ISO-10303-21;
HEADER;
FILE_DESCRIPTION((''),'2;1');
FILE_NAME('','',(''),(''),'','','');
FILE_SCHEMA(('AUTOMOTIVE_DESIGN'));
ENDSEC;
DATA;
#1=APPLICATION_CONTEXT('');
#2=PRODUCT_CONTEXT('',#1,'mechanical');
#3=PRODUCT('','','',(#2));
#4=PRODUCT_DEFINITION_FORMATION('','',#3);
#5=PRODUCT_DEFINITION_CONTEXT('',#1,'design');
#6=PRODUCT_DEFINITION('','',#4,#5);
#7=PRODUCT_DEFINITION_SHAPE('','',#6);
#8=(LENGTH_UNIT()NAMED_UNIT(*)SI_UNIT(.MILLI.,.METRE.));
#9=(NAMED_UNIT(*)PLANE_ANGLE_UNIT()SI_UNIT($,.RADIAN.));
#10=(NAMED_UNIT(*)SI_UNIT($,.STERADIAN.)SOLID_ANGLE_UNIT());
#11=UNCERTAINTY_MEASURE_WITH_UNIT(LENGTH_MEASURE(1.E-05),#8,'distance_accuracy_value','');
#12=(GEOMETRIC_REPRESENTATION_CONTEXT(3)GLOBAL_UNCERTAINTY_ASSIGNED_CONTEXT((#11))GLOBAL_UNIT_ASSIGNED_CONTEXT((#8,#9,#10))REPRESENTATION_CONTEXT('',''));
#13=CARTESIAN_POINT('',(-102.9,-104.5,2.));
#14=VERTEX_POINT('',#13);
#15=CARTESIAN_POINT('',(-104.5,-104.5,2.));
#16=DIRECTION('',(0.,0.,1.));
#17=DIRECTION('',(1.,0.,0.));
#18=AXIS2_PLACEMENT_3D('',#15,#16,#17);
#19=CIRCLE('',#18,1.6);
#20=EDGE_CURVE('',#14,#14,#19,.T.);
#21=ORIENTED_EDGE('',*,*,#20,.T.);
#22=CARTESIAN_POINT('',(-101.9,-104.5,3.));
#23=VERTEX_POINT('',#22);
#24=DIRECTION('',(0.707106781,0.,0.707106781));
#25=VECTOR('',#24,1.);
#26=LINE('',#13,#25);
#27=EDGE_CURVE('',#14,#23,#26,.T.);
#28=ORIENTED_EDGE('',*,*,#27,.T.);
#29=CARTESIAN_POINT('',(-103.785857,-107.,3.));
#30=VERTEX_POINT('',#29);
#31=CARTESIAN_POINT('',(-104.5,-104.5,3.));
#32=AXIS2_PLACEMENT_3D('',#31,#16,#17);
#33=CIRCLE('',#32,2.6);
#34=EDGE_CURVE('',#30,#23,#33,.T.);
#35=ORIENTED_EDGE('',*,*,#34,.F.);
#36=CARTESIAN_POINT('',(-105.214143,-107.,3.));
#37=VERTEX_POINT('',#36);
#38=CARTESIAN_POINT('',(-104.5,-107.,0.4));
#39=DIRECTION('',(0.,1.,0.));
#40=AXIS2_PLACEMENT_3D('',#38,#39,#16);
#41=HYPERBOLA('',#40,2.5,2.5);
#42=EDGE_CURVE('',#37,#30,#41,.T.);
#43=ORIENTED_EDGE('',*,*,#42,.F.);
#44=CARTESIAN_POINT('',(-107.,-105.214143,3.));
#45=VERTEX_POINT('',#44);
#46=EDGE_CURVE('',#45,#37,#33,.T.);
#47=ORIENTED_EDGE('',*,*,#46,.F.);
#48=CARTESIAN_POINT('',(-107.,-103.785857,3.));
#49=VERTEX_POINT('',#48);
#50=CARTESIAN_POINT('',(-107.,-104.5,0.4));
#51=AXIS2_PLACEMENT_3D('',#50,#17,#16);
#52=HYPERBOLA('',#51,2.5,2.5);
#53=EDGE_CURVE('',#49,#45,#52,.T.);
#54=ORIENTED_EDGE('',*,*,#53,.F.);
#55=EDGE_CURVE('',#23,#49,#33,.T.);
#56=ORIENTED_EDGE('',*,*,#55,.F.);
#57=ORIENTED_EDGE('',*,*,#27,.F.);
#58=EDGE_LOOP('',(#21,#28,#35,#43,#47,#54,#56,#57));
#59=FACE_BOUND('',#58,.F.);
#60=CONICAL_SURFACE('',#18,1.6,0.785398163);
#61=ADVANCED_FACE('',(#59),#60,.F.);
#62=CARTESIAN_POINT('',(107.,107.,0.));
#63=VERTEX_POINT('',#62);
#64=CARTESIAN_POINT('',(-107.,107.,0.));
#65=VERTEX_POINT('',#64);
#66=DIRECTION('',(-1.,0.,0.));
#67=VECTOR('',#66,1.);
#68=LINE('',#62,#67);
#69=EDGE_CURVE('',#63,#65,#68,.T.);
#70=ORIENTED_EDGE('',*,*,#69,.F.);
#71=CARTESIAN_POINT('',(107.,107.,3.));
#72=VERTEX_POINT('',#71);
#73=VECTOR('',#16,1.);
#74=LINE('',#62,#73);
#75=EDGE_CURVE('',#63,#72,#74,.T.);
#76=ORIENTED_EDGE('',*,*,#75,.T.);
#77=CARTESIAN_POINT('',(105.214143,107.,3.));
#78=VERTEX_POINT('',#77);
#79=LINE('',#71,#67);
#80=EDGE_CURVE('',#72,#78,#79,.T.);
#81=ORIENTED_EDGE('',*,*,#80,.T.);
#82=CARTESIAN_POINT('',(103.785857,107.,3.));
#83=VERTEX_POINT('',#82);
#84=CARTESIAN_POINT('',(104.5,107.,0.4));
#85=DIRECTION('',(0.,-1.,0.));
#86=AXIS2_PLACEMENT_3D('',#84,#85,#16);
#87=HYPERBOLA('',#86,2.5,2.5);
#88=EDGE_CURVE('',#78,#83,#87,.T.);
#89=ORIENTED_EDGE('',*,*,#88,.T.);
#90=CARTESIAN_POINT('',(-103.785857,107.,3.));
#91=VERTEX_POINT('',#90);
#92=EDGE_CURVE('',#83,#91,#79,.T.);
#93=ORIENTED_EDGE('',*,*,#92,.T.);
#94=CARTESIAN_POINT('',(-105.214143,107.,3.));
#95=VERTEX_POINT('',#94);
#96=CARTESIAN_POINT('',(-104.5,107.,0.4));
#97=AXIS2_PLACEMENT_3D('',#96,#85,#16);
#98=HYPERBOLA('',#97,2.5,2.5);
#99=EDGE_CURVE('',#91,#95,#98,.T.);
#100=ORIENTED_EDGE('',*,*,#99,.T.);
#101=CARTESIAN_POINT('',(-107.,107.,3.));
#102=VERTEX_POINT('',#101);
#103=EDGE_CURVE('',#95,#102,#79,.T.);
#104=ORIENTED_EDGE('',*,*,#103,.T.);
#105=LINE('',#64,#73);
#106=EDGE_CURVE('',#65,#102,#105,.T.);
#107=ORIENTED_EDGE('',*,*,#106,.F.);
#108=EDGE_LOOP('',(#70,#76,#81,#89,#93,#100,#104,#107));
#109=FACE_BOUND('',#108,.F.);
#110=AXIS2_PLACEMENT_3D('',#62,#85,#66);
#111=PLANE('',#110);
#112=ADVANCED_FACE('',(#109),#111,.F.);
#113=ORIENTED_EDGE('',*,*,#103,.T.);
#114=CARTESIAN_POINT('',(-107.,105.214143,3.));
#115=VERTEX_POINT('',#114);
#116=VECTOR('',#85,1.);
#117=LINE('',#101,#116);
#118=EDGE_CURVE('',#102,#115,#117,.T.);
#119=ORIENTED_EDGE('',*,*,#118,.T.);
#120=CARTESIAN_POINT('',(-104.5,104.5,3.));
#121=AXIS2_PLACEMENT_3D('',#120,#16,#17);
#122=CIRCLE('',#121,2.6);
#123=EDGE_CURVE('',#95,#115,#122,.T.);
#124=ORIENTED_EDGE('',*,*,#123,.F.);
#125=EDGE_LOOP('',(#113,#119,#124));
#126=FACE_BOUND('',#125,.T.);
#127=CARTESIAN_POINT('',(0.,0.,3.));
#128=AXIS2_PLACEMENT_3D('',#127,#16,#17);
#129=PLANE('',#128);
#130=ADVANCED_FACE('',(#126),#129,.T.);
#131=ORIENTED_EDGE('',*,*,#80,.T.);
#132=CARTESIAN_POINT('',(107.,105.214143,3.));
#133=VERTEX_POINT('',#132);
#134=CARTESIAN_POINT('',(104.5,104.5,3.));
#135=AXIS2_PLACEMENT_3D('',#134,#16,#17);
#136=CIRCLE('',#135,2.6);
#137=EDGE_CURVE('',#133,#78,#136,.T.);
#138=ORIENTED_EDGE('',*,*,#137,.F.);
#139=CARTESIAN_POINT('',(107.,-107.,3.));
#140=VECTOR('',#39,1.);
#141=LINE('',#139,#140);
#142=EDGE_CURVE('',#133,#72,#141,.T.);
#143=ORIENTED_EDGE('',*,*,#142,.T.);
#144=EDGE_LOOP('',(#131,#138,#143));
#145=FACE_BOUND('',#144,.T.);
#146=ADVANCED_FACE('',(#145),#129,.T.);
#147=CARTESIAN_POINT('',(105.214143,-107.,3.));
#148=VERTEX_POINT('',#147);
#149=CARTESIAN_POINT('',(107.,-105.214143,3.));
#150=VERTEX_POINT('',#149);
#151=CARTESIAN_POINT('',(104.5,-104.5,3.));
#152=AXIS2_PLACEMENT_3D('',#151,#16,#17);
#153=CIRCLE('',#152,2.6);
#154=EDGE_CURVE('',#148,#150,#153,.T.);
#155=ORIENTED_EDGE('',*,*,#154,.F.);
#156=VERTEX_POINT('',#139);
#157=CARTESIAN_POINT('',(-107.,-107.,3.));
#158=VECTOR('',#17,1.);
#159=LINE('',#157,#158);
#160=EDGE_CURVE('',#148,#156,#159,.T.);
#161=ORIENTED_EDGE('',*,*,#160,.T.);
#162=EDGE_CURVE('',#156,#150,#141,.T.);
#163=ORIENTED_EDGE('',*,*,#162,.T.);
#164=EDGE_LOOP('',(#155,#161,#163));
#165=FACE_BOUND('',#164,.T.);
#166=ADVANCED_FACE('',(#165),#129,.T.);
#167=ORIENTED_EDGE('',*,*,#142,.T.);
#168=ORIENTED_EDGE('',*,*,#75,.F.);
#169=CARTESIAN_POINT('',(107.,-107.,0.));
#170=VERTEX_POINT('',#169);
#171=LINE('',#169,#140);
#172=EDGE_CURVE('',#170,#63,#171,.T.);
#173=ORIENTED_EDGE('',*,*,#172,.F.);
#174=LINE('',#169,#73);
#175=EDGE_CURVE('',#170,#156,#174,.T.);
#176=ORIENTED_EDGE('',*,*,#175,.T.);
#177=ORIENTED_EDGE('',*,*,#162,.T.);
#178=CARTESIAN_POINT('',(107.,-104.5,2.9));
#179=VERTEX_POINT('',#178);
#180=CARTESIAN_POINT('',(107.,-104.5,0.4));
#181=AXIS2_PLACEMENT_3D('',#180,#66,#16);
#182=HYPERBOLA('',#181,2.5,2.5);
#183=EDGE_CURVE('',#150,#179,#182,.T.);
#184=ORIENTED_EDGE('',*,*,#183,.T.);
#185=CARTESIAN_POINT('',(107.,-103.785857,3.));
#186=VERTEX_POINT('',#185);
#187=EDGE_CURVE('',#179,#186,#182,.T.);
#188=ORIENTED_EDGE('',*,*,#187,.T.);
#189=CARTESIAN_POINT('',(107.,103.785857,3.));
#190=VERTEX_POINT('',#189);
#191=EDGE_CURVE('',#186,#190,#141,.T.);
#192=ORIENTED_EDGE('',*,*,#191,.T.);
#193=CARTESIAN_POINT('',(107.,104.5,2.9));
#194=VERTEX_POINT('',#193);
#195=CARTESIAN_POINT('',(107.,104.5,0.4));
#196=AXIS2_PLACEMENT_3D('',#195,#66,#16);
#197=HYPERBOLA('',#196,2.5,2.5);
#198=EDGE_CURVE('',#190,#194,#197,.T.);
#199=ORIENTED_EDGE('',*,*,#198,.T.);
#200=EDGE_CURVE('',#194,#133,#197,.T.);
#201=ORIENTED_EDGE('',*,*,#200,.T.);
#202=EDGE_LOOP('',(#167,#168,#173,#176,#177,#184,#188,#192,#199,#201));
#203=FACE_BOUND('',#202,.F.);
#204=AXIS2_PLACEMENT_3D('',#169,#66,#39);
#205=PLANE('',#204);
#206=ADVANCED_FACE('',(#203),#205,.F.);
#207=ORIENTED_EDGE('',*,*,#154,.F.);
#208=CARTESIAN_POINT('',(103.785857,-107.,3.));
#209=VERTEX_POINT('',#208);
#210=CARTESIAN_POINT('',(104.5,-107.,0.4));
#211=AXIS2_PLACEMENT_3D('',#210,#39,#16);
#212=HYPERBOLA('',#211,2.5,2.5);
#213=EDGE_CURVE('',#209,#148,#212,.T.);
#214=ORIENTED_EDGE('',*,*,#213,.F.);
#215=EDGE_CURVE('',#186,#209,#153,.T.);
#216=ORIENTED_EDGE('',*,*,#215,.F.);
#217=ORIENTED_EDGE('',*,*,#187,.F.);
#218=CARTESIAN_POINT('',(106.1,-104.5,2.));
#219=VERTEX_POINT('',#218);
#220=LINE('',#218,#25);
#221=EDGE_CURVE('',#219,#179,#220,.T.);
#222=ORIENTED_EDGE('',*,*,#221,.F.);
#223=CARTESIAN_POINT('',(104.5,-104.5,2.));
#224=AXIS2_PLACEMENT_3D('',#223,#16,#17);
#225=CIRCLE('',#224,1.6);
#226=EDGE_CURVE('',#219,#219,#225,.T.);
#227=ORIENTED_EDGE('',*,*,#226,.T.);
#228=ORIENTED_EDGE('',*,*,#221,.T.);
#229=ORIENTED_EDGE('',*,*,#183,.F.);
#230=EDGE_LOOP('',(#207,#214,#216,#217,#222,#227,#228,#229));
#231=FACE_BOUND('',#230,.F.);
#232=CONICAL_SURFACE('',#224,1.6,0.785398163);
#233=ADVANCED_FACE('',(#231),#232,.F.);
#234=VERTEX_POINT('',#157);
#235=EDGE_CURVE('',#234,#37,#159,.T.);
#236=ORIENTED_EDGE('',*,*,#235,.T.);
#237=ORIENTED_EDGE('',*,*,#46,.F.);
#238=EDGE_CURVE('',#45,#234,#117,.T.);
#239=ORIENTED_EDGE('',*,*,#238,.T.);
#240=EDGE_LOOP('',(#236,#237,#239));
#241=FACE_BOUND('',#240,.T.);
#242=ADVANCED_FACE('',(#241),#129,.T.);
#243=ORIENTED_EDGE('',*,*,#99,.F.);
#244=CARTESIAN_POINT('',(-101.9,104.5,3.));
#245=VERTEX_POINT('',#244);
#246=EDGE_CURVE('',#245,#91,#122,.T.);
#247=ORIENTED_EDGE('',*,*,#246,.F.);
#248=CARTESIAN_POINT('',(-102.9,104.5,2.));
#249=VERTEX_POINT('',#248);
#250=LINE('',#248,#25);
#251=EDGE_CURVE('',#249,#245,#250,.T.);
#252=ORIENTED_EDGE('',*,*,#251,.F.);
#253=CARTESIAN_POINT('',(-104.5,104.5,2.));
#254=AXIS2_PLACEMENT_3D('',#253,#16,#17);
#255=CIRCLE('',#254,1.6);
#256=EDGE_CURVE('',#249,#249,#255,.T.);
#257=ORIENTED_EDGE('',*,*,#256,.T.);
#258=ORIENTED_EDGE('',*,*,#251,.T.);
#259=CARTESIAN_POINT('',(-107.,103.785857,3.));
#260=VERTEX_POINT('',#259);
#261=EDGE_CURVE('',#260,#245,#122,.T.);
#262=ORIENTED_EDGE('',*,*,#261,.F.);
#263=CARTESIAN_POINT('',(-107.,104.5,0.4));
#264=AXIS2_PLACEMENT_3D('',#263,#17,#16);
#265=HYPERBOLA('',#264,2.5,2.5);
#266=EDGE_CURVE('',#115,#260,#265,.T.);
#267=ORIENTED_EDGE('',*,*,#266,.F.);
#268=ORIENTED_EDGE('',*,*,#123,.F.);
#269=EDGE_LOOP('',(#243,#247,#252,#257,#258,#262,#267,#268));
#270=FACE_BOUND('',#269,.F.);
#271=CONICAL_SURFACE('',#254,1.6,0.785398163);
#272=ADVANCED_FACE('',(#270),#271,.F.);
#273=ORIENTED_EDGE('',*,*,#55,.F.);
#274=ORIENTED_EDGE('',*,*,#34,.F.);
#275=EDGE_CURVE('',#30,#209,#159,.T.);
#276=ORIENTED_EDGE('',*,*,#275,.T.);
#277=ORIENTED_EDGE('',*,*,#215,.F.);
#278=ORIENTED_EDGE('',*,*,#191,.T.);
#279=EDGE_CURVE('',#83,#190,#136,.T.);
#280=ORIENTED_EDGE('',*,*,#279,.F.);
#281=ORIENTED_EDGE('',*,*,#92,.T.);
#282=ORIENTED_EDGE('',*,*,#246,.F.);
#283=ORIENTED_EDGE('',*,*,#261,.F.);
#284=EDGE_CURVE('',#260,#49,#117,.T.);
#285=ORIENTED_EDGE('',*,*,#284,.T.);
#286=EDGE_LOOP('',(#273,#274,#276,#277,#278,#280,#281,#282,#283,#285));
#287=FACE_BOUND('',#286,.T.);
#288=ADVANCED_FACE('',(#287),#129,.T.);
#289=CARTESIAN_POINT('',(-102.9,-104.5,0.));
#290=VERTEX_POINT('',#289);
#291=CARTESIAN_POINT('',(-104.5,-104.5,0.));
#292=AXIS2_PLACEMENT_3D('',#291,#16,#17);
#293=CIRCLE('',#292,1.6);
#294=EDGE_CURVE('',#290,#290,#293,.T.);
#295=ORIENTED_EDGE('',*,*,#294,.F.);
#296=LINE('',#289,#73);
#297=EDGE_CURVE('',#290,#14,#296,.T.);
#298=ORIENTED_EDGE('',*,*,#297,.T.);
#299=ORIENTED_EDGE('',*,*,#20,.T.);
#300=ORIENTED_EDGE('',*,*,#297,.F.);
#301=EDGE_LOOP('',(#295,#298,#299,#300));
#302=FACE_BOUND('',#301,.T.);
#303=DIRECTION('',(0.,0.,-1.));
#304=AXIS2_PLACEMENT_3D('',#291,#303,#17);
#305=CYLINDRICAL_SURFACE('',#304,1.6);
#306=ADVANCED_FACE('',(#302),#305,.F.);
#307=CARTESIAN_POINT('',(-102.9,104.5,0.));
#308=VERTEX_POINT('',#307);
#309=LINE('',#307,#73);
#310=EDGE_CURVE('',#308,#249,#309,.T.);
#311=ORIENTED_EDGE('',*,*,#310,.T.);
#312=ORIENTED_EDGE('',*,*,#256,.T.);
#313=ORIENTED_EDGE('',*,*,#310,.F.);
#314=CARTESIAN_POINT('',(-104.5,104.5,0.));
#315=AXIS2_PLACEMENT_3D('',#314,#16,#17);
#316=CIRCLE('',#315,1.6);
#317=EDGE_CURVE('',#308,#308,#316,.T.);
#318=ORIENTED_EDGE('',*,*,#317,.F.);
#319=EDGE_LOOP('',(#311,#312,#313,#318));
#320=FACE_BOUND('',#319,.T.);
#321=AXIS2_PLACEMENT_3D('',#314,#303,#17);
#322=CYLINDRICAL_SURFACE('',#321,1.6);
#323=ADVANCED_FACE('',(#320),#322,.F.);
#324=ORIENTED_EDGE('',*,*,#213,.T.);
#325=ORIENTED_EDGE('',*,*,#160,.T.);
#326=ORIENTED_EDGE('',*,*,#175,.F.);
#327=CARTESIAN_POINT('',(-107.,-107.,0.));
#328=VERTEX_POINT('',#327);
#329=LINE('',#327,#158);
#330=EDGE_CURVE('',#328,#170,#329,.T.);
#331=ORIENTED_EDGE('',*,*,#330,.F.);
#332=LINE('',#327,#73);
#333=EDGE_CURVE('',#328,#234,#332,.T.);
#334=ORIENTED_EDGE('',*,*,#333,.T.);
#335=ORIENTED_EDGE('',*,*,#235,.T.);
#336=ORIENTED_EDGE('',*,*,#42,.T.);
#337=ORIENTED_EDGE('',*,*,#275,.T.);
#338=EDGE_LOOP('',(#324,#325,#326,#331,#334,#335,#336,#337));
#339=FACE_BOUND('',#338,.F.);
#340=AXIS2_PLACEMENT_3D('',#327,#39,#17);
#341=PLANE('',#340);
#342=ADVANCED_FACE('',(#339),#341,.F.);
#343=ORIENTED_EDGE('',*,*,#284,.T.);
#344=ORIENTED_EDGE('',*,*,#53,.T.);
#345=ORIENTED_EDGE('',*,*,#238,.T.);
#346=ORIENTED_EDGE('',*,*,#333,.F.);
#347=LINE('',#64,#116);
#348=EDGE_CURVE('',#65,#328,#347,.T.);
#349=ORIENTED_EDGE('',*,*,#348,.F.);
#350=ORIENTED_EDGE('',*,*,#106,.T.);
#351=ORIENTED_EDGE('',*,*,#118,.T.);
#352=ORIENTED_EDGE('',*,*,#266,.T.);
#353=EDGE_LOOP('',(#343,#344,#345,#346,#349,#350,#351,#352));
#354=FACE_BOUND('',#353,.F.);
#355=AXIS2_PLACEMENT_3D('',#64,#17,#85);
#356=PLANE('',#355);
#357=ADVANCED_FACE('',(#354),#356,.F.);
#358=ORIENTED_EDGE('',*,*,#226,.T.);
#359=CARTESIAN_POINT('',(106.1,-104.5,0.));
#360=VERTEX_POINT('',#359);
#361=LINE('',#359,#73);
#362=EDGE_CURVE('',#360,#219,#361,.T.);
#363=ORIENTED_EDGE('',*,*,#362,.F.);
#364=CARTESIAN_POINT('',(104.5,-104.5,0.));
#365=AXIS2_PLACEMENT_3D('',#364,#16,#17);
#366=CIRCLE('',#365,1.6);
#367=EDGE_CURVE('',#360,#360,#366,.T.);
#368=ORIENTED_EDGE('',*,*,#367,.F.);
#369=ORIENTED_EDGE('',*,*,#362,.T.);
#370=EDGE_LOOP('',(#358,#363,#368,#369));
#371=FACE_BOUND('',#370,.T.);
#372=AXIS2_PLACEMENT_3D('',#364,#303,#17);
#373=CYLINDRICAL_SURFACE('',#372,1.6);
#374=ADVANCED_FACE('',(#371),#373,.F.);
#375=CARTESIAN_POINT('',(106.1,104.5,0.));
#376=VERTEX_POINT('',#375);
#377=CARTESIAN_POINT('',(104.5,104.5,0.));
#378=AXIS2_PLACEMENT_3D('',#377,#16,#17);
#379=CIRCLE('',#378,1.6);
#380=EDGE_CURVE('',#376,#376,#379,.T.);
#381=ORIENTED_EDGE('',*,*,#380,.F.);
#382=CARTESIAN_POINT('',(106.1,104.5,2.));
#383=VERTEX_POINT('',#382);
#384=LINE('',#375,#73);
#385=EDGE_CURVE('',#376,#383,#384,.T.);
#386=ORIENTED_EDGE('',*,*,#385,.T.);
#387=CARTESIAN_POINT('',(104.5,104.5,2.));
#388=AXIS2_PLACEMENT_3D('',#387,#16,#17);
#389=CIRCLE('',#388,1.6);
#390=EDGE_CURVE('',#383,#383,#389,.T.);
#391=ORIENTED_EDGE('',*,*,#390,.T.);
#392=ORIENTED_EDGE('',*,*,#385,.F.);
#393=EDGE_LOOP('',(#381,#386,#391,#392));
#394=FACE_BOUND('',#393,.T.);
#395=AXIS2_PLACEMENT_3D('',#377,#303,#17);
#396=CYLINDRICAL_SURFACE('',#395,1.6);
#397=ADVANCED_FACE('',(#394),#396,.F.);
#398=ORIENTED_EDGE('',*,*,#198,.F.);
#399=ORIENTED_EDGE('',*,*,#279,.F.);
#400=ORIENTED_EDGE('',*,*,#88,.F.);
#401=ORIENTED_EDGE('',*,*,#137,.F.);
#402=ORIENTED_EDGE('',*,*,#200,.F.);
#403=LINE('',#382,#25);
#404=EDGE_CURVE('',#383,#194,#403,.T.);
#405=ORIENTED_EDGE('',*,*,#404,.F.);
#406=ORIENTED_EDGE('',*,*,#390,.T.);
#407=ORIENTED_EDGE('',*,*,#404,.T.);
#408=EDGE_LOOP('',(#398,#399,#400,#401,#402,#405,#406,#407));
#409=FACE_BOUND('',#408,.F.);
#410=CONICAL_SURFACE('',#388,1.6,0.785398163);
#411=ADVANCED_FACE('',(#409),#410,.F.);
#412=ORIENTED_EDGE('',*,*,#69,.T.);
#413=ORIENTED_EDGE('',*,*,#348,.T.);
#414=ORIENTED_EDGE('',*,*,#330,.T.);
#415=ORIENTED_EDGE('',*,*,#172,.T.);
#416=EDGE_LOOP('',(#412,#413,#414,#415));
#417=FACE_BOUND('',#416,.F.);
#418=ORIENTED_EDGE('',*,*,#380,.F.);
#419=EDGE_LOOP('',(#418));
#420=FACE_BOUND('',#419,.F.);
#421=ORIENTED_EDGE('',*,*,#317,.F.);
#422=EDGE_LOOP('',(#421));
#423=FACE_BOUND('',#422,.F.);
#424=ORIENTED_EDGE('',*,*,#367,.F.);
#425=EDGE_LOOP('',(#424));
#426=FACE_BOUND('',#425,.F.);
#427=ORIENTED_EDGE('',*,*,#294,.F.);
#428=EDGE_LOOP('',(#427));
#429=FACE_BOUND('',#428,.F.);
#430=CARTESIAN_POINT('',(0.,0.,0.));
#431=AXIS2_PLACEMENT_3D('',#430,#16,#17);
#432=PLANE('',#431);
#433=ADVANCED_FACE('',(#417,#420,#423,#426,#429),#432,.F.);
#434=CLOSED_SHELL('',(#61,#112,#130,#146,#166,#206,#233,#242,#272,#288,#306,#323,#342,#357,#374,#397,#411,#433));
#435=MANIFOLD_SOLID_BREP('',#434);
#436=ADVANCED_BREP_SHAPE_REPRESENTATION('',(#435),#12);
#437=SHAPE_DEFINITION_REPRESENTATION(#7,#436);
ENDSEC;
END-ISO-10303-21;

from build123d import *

# Parameters (mm, degrees)
F0_R     = 1.6
F1_DEPTH = 3


# Not quite as in the source:
# - a fillet or chamfer that OpenCascade refuses, or shapes differently, is made with other operations: its cross-section is extruded or revolved along the edge and cut away or added


with BuildPart() as f1:
    # F0 (on Top) → F1 (new body)
    with BuildSketch(Plane.XY):
        Polygon((-107, 107), (-107, 0), (-107, -107), (0, -107), (107, -107), (107, 0), (107, 107), (0, 107), align=None)
        with Locations((-104.5, -104.5)):
            Circle(F0_R, mode=Mode.SUBTRACT)
        with Locations((104.5, -104.5)):
            Circle(F0_R, mode=Mode.SUBTRACT)
        with Locations((-104.5, 104.5)):
            Circle(F0_R, mode=Mode.SUBTRACT)
        with Locations((104.5, 104.5)):
            Circle(F0_R, mode=Mode.SUBTRACT)
    extrude(amount=F1_DEPTH)

    # F2: chamfer of 1 on 4 edges, made by hand

    # F2_s1 → F2_t2 (revolve, cut)
    with BuildSketch(Plane.XZ.offset(104.5)):
        Polygon((-102.9, 2), (-101.9, 3), (-102.9, 3), align=None)
    revolve(axis=Axis((-104.5, -104.5, 3), (0, 0, 1)), mode=Mode.SUBTRACT)

    # F2_s3 → F2_t4 (revolve, cut)
    with BuildSketch(Plane.XZ.offset(-104.5)):
        Polygon((-102.9, 2), (-101.9, 3), (-102.9, 3), align=None)
    revolve(axis=Axis((-104.5, 104.5, 3), (0, 0, 1)), mode=Mode.SUBTRACT)

    # F2_s5 → F2_t6 (revolve, cut)
    with BuildSketch(Plane.XZ.offset(-104.5)):
        Polygon((106.1, 2), (107.1, 3), (106.1, 3), align=None)
    revolve(axis=Axis((104.5, 104.5, 3), (0, 0, 1)), mode=Mode.SUBTRACT)

    # F2_s7 → F2_t8 (revolve, cut)
    with BuildSketch(Plane.XZ.offset(104.5)):
        Polygon((106.1, 2), (107.1, 3), (106.1, 3), align=None)
    revolve(axis=Axis((104.5, -104.5, 3), (0, 0, 1)), mode=Mode.SUBTRACT)


solid = f1.part
